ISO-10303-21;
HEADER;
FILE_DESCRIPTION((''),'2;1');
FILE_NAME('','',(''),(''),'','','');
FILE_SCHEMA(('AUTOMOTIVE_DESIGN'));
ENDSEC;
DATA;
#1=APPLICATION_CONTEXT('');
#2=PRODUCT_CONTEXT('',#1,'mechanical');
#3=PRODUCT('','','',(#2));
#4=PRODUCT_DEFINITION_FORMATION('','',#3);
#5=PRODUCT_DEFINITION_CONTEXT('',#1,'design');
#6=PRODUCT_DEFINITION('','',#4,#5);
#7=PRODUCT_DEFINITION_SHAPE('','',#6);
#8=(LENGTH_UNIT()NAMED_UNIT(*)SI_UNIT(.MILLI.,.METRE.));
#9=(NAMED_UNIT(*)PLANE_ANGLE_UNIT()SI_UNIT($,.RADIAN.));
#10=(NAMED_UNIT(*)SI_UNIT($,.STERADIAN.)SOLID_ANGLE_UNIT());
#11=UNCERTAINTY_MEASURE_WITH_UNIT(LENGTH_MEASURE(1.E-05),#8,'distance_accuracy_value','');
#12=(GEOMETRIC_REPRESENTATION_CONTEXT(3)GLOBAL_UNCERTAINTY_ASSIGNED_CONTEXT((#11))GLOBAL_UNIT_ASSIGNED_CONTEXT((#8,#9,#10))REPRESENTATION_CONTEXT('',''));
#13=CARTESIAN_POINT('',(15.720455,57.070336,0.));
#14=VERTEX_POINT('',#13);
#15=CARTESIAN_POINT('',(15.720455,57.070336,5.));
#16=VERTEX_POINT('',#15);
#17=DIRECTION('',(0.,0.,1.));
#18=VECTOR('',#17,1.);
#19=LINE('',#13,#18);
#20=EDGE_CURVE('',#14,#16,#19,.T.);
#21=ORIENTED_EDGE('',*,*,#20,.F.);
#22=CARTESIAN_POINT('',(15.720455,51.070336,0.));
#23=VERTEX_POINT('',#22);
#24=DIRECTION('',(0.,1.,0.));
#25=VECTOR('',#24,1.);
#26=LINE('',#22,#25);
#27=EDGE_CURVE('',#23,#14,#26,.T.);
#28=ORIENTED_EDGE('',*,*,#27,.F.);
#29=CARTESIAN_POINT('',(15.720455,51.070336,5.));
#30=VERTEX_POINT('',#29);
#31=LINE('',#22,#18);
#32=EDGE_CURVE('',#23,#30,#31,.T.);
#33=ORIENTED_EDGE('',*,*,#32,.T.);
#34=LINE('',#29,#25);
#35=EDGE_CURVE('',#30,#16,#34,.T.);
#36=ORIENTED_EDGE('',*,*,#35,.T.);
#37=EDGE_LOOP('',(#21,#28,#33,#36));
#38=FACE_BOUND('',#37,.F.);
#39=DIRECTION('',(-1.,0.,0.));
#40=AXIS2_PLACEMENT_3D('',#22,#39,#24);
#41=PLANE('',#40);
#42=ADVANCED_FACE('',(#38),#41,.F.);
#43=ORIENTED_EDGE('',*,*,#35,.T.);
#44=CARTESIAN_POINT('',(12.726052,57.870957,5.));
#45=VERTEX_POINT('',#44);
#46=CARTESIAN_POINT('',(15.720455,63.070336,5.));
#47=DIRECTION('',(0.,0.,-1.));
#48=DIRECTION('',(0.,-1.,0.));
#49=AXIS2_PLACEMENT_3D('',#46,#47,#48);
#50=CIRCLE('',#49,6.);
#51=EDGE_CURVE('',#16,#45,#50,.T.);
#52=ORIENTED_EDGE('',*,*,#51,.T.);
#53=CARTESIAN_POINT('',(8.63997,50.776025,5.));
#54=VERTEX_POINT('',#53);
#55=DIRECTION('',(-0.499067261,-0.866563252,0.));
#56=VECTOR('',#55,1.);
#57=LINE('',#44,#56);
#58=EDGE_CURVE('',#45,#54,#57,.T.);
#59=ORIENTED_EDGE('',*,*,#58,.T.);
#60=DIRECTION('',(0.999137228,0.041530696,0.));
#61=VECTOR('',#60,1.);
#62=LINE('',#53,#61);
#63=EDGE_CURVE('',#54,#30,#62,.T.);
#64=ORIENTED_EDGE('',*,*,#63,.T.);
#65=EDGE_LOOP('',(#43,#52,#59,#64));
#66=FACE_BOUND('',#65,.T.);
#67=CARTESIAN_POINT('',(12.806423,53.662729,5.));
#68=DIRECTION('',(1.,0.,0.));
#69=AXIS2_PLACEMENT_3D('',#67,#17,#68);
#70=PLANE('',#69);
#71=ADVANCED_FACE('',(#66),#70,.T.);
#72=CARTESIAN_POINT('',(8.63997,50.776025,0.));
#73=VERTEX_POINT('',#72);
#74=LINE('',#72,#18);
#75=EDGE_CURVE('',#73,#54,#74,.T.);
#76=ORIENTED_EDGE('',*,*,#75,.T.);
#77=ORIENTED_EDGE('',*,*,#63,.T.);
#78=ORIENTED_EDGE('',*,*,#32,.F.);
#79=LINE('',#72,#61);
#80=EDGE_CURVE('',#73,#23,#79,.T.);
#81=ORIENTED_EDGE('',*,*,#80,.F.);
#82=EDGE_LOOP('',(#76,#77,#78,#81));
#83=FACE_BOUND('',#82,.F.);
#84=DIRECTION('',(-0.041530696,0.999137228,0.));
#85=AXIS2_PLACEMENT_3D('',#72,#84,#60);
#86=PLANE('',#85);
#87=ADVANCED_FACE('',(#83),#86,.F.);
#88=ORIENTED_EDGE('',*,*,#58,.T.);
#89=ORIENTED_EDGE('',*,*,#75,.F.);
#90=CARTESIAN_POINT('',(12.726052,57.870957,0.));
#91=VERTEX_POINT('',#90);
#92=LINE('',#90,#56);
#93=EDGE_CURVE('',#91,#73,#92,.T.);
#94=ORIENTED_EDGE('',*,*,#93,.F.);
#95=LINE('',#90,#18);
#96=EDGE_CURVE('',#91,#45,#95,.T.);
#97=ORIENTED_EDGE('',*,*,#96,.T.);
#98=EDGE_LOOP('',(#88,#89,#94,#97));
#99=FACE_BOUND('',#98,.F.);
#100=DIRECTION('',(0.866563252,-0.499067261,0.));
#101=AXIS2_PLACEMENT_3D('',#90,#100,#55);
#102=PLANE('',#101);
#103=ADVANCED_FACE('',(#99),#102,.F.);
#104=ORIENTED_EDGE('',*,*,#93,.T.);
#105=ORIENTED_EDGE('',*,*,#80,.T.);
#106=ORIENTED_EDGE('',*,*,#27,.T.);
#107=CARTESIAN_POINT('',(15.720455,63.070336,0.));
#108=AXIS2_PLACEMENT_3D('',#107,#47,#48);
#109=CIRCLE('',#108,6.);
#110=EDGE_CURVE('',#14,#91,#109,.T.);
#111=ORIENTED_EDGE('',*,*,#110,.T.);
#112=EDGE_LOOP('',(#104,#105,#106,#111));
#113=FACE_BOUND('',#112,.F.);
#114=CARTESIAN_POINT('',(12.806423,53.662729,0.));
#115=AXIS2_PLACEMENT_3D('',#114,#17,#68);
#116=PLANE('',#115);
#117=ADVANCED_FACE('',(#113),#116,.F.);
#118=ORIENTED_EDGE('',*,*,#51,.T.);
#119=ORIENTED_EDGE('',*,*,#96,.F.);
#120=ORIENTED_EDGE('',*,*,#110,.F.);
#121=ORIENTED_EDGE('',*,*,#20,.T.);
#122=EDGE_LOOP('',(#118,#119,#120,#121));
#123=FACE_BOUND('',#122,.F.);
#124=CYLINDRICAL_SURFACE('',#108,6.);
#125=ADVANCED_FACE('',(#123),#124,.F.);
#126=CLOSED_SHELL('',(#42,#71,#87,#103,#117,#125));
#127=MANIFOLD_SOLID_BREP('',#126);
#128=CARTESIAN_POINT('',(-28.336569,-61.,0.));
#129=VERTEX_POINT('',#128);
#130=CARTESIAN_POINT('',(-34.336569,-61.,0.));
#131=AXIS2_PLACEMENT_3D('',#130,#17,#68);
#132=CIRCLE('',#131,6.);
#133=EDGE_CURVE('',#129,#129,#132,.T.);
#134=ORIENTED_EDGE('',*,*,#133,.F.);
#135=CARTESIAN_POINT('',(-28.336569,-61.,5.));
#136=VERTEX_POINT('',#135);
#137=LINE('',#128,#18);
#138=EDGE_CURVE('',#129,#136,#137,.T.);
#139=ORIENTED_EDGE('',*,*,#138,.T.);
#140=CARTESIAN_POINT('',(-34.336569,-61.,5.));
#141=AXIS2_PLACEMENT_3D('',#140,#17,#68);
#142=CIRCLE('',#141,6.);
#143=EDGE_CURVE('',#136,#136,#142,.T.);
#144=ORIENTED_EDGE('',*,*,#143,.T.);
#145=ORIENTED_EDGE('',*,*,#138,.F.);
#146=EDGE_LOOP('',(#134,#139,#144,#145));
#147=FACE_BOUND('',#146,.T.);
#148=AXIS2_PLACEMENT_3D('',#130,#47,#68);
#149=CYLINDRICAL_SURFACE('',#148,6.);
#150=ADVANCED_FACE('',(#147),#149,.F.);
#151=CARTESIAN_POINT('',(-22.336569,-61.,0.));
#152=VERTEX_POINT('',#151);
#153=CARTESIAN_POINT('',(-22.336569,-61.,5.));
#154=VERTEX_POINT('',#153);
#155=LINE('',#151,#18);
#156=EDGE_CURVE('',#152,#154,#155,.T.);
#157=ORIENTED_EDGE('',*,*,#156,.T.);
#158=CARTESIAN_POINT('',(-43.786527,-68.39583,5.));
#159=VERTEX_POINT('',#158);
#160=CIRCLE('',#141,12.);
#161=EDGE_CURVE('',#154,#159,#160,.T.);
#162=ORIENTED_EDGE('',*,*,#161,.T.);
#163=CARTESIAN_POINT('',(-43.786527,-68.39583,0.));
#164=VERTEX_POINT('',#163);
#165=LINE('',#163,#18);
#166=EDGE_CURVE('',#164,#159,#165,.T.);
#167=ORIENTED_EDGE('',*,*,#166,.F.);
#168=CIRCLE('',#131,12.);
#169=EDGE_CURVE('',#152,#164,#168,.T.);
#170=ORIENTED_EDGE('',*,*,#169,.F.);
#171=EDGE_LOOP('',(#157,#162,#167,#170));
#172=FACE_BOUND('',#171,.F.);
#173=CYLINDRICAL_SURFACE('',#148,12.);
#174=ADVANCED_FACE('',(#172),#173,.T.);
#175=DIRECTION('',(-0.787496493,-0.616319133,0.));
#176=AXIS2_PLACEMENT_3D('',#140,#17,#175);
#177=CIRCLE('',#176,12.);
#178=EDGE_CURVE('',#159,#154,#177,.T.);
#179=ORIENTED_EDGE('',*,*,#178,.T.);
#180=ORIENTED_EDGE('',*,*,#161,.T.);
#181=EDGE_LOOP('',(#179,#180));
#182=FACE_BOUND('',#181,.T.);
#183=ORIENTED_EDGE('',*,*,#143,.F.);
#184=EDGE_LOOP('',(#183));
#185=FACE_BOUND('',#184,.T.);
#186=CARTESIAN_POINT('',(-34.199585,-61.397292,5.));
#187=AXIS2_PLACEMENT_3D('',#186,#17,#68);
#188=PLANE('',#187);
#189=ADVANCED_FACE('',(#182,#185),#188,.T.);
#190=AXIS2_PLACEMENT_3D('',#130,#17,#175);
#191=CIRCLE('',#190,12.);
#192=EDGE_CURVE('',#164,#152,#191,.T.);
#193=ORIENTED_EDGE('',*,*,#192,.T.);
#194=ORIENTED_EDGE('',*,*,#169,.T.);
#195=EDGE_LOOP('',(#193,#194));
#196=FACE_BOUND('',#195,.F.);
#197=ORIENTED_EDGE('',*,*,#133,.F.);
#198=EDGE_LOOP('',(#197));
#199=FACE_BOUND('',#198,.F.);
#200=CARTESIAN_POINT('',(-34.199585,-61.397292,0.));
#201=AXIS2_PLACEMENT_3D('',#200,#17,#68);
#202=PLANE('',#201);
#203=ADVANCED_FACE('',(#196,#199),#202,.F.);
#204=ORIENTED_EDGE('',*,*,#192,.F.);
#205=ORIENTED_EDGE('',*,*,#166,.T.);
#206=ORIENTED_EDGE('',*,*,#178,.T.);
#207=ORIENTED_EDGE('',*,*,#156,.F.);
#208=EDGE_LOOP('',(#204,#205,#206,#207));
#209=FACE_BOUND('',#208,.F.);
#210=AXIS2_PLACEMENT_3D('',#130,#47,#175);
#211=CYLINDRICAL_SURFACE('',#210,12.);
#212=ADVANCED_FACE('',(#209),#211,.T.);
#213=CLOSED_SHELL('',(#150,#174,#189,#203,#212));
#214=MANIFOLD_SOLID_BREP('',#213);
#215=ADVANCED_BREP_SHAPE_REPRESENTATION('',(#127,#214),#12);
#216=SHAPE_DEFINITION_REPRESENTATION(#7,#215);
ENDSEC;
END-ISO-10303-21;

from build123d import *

# Parameters (mm, degrees)
F1_DEPTH = 5
F0_R     = 6


with BuildPart() as f1:
    # F0 (on Top) → F1 (new body)
    with BuildSketch(Plane.XY):
        with BuildLine():
            Line((12.7260516557, 57.8709565262), (8.6399699737, 50.7760246323))
            Line((8.6399699737, 50.7760246323), (15.7204552226, 51.0703360352))
            Line((15.7204552226, 51.0703360352), (15.7204552226, 57.0703360352))
            ThreePointArc((15.7204552226, 57.0703360352), (14.1706612127, 57.2739459063), (12.7260516557, 57.8709565262))
        make_face()
    extrude(amount=F1_DEPTH)


with BuildPart() as f1b:
    # F0 (on Top) → F1, piece 2 (new body)
    with BuildSketch(Plane.XY):
        with BuildLine():
            ThreePointArc((-43.7865273393, -68.3958295986), (-30.4250157042, -72.344591111), (-22.3365694268, -61))
            ThreePointArc((-22.3365694268, -61), (-38.2481231494, -49.655408889), (-43.7865273393, -68.3958295986))
        make_face()
        with Locations((-34.3365694268, -61)):
            Circle(F0_R, mode=Mode.SUBTRACT)
    extrude(amount=F1_DEPTH)


solid = Compound([f1.part, f1b.part])
